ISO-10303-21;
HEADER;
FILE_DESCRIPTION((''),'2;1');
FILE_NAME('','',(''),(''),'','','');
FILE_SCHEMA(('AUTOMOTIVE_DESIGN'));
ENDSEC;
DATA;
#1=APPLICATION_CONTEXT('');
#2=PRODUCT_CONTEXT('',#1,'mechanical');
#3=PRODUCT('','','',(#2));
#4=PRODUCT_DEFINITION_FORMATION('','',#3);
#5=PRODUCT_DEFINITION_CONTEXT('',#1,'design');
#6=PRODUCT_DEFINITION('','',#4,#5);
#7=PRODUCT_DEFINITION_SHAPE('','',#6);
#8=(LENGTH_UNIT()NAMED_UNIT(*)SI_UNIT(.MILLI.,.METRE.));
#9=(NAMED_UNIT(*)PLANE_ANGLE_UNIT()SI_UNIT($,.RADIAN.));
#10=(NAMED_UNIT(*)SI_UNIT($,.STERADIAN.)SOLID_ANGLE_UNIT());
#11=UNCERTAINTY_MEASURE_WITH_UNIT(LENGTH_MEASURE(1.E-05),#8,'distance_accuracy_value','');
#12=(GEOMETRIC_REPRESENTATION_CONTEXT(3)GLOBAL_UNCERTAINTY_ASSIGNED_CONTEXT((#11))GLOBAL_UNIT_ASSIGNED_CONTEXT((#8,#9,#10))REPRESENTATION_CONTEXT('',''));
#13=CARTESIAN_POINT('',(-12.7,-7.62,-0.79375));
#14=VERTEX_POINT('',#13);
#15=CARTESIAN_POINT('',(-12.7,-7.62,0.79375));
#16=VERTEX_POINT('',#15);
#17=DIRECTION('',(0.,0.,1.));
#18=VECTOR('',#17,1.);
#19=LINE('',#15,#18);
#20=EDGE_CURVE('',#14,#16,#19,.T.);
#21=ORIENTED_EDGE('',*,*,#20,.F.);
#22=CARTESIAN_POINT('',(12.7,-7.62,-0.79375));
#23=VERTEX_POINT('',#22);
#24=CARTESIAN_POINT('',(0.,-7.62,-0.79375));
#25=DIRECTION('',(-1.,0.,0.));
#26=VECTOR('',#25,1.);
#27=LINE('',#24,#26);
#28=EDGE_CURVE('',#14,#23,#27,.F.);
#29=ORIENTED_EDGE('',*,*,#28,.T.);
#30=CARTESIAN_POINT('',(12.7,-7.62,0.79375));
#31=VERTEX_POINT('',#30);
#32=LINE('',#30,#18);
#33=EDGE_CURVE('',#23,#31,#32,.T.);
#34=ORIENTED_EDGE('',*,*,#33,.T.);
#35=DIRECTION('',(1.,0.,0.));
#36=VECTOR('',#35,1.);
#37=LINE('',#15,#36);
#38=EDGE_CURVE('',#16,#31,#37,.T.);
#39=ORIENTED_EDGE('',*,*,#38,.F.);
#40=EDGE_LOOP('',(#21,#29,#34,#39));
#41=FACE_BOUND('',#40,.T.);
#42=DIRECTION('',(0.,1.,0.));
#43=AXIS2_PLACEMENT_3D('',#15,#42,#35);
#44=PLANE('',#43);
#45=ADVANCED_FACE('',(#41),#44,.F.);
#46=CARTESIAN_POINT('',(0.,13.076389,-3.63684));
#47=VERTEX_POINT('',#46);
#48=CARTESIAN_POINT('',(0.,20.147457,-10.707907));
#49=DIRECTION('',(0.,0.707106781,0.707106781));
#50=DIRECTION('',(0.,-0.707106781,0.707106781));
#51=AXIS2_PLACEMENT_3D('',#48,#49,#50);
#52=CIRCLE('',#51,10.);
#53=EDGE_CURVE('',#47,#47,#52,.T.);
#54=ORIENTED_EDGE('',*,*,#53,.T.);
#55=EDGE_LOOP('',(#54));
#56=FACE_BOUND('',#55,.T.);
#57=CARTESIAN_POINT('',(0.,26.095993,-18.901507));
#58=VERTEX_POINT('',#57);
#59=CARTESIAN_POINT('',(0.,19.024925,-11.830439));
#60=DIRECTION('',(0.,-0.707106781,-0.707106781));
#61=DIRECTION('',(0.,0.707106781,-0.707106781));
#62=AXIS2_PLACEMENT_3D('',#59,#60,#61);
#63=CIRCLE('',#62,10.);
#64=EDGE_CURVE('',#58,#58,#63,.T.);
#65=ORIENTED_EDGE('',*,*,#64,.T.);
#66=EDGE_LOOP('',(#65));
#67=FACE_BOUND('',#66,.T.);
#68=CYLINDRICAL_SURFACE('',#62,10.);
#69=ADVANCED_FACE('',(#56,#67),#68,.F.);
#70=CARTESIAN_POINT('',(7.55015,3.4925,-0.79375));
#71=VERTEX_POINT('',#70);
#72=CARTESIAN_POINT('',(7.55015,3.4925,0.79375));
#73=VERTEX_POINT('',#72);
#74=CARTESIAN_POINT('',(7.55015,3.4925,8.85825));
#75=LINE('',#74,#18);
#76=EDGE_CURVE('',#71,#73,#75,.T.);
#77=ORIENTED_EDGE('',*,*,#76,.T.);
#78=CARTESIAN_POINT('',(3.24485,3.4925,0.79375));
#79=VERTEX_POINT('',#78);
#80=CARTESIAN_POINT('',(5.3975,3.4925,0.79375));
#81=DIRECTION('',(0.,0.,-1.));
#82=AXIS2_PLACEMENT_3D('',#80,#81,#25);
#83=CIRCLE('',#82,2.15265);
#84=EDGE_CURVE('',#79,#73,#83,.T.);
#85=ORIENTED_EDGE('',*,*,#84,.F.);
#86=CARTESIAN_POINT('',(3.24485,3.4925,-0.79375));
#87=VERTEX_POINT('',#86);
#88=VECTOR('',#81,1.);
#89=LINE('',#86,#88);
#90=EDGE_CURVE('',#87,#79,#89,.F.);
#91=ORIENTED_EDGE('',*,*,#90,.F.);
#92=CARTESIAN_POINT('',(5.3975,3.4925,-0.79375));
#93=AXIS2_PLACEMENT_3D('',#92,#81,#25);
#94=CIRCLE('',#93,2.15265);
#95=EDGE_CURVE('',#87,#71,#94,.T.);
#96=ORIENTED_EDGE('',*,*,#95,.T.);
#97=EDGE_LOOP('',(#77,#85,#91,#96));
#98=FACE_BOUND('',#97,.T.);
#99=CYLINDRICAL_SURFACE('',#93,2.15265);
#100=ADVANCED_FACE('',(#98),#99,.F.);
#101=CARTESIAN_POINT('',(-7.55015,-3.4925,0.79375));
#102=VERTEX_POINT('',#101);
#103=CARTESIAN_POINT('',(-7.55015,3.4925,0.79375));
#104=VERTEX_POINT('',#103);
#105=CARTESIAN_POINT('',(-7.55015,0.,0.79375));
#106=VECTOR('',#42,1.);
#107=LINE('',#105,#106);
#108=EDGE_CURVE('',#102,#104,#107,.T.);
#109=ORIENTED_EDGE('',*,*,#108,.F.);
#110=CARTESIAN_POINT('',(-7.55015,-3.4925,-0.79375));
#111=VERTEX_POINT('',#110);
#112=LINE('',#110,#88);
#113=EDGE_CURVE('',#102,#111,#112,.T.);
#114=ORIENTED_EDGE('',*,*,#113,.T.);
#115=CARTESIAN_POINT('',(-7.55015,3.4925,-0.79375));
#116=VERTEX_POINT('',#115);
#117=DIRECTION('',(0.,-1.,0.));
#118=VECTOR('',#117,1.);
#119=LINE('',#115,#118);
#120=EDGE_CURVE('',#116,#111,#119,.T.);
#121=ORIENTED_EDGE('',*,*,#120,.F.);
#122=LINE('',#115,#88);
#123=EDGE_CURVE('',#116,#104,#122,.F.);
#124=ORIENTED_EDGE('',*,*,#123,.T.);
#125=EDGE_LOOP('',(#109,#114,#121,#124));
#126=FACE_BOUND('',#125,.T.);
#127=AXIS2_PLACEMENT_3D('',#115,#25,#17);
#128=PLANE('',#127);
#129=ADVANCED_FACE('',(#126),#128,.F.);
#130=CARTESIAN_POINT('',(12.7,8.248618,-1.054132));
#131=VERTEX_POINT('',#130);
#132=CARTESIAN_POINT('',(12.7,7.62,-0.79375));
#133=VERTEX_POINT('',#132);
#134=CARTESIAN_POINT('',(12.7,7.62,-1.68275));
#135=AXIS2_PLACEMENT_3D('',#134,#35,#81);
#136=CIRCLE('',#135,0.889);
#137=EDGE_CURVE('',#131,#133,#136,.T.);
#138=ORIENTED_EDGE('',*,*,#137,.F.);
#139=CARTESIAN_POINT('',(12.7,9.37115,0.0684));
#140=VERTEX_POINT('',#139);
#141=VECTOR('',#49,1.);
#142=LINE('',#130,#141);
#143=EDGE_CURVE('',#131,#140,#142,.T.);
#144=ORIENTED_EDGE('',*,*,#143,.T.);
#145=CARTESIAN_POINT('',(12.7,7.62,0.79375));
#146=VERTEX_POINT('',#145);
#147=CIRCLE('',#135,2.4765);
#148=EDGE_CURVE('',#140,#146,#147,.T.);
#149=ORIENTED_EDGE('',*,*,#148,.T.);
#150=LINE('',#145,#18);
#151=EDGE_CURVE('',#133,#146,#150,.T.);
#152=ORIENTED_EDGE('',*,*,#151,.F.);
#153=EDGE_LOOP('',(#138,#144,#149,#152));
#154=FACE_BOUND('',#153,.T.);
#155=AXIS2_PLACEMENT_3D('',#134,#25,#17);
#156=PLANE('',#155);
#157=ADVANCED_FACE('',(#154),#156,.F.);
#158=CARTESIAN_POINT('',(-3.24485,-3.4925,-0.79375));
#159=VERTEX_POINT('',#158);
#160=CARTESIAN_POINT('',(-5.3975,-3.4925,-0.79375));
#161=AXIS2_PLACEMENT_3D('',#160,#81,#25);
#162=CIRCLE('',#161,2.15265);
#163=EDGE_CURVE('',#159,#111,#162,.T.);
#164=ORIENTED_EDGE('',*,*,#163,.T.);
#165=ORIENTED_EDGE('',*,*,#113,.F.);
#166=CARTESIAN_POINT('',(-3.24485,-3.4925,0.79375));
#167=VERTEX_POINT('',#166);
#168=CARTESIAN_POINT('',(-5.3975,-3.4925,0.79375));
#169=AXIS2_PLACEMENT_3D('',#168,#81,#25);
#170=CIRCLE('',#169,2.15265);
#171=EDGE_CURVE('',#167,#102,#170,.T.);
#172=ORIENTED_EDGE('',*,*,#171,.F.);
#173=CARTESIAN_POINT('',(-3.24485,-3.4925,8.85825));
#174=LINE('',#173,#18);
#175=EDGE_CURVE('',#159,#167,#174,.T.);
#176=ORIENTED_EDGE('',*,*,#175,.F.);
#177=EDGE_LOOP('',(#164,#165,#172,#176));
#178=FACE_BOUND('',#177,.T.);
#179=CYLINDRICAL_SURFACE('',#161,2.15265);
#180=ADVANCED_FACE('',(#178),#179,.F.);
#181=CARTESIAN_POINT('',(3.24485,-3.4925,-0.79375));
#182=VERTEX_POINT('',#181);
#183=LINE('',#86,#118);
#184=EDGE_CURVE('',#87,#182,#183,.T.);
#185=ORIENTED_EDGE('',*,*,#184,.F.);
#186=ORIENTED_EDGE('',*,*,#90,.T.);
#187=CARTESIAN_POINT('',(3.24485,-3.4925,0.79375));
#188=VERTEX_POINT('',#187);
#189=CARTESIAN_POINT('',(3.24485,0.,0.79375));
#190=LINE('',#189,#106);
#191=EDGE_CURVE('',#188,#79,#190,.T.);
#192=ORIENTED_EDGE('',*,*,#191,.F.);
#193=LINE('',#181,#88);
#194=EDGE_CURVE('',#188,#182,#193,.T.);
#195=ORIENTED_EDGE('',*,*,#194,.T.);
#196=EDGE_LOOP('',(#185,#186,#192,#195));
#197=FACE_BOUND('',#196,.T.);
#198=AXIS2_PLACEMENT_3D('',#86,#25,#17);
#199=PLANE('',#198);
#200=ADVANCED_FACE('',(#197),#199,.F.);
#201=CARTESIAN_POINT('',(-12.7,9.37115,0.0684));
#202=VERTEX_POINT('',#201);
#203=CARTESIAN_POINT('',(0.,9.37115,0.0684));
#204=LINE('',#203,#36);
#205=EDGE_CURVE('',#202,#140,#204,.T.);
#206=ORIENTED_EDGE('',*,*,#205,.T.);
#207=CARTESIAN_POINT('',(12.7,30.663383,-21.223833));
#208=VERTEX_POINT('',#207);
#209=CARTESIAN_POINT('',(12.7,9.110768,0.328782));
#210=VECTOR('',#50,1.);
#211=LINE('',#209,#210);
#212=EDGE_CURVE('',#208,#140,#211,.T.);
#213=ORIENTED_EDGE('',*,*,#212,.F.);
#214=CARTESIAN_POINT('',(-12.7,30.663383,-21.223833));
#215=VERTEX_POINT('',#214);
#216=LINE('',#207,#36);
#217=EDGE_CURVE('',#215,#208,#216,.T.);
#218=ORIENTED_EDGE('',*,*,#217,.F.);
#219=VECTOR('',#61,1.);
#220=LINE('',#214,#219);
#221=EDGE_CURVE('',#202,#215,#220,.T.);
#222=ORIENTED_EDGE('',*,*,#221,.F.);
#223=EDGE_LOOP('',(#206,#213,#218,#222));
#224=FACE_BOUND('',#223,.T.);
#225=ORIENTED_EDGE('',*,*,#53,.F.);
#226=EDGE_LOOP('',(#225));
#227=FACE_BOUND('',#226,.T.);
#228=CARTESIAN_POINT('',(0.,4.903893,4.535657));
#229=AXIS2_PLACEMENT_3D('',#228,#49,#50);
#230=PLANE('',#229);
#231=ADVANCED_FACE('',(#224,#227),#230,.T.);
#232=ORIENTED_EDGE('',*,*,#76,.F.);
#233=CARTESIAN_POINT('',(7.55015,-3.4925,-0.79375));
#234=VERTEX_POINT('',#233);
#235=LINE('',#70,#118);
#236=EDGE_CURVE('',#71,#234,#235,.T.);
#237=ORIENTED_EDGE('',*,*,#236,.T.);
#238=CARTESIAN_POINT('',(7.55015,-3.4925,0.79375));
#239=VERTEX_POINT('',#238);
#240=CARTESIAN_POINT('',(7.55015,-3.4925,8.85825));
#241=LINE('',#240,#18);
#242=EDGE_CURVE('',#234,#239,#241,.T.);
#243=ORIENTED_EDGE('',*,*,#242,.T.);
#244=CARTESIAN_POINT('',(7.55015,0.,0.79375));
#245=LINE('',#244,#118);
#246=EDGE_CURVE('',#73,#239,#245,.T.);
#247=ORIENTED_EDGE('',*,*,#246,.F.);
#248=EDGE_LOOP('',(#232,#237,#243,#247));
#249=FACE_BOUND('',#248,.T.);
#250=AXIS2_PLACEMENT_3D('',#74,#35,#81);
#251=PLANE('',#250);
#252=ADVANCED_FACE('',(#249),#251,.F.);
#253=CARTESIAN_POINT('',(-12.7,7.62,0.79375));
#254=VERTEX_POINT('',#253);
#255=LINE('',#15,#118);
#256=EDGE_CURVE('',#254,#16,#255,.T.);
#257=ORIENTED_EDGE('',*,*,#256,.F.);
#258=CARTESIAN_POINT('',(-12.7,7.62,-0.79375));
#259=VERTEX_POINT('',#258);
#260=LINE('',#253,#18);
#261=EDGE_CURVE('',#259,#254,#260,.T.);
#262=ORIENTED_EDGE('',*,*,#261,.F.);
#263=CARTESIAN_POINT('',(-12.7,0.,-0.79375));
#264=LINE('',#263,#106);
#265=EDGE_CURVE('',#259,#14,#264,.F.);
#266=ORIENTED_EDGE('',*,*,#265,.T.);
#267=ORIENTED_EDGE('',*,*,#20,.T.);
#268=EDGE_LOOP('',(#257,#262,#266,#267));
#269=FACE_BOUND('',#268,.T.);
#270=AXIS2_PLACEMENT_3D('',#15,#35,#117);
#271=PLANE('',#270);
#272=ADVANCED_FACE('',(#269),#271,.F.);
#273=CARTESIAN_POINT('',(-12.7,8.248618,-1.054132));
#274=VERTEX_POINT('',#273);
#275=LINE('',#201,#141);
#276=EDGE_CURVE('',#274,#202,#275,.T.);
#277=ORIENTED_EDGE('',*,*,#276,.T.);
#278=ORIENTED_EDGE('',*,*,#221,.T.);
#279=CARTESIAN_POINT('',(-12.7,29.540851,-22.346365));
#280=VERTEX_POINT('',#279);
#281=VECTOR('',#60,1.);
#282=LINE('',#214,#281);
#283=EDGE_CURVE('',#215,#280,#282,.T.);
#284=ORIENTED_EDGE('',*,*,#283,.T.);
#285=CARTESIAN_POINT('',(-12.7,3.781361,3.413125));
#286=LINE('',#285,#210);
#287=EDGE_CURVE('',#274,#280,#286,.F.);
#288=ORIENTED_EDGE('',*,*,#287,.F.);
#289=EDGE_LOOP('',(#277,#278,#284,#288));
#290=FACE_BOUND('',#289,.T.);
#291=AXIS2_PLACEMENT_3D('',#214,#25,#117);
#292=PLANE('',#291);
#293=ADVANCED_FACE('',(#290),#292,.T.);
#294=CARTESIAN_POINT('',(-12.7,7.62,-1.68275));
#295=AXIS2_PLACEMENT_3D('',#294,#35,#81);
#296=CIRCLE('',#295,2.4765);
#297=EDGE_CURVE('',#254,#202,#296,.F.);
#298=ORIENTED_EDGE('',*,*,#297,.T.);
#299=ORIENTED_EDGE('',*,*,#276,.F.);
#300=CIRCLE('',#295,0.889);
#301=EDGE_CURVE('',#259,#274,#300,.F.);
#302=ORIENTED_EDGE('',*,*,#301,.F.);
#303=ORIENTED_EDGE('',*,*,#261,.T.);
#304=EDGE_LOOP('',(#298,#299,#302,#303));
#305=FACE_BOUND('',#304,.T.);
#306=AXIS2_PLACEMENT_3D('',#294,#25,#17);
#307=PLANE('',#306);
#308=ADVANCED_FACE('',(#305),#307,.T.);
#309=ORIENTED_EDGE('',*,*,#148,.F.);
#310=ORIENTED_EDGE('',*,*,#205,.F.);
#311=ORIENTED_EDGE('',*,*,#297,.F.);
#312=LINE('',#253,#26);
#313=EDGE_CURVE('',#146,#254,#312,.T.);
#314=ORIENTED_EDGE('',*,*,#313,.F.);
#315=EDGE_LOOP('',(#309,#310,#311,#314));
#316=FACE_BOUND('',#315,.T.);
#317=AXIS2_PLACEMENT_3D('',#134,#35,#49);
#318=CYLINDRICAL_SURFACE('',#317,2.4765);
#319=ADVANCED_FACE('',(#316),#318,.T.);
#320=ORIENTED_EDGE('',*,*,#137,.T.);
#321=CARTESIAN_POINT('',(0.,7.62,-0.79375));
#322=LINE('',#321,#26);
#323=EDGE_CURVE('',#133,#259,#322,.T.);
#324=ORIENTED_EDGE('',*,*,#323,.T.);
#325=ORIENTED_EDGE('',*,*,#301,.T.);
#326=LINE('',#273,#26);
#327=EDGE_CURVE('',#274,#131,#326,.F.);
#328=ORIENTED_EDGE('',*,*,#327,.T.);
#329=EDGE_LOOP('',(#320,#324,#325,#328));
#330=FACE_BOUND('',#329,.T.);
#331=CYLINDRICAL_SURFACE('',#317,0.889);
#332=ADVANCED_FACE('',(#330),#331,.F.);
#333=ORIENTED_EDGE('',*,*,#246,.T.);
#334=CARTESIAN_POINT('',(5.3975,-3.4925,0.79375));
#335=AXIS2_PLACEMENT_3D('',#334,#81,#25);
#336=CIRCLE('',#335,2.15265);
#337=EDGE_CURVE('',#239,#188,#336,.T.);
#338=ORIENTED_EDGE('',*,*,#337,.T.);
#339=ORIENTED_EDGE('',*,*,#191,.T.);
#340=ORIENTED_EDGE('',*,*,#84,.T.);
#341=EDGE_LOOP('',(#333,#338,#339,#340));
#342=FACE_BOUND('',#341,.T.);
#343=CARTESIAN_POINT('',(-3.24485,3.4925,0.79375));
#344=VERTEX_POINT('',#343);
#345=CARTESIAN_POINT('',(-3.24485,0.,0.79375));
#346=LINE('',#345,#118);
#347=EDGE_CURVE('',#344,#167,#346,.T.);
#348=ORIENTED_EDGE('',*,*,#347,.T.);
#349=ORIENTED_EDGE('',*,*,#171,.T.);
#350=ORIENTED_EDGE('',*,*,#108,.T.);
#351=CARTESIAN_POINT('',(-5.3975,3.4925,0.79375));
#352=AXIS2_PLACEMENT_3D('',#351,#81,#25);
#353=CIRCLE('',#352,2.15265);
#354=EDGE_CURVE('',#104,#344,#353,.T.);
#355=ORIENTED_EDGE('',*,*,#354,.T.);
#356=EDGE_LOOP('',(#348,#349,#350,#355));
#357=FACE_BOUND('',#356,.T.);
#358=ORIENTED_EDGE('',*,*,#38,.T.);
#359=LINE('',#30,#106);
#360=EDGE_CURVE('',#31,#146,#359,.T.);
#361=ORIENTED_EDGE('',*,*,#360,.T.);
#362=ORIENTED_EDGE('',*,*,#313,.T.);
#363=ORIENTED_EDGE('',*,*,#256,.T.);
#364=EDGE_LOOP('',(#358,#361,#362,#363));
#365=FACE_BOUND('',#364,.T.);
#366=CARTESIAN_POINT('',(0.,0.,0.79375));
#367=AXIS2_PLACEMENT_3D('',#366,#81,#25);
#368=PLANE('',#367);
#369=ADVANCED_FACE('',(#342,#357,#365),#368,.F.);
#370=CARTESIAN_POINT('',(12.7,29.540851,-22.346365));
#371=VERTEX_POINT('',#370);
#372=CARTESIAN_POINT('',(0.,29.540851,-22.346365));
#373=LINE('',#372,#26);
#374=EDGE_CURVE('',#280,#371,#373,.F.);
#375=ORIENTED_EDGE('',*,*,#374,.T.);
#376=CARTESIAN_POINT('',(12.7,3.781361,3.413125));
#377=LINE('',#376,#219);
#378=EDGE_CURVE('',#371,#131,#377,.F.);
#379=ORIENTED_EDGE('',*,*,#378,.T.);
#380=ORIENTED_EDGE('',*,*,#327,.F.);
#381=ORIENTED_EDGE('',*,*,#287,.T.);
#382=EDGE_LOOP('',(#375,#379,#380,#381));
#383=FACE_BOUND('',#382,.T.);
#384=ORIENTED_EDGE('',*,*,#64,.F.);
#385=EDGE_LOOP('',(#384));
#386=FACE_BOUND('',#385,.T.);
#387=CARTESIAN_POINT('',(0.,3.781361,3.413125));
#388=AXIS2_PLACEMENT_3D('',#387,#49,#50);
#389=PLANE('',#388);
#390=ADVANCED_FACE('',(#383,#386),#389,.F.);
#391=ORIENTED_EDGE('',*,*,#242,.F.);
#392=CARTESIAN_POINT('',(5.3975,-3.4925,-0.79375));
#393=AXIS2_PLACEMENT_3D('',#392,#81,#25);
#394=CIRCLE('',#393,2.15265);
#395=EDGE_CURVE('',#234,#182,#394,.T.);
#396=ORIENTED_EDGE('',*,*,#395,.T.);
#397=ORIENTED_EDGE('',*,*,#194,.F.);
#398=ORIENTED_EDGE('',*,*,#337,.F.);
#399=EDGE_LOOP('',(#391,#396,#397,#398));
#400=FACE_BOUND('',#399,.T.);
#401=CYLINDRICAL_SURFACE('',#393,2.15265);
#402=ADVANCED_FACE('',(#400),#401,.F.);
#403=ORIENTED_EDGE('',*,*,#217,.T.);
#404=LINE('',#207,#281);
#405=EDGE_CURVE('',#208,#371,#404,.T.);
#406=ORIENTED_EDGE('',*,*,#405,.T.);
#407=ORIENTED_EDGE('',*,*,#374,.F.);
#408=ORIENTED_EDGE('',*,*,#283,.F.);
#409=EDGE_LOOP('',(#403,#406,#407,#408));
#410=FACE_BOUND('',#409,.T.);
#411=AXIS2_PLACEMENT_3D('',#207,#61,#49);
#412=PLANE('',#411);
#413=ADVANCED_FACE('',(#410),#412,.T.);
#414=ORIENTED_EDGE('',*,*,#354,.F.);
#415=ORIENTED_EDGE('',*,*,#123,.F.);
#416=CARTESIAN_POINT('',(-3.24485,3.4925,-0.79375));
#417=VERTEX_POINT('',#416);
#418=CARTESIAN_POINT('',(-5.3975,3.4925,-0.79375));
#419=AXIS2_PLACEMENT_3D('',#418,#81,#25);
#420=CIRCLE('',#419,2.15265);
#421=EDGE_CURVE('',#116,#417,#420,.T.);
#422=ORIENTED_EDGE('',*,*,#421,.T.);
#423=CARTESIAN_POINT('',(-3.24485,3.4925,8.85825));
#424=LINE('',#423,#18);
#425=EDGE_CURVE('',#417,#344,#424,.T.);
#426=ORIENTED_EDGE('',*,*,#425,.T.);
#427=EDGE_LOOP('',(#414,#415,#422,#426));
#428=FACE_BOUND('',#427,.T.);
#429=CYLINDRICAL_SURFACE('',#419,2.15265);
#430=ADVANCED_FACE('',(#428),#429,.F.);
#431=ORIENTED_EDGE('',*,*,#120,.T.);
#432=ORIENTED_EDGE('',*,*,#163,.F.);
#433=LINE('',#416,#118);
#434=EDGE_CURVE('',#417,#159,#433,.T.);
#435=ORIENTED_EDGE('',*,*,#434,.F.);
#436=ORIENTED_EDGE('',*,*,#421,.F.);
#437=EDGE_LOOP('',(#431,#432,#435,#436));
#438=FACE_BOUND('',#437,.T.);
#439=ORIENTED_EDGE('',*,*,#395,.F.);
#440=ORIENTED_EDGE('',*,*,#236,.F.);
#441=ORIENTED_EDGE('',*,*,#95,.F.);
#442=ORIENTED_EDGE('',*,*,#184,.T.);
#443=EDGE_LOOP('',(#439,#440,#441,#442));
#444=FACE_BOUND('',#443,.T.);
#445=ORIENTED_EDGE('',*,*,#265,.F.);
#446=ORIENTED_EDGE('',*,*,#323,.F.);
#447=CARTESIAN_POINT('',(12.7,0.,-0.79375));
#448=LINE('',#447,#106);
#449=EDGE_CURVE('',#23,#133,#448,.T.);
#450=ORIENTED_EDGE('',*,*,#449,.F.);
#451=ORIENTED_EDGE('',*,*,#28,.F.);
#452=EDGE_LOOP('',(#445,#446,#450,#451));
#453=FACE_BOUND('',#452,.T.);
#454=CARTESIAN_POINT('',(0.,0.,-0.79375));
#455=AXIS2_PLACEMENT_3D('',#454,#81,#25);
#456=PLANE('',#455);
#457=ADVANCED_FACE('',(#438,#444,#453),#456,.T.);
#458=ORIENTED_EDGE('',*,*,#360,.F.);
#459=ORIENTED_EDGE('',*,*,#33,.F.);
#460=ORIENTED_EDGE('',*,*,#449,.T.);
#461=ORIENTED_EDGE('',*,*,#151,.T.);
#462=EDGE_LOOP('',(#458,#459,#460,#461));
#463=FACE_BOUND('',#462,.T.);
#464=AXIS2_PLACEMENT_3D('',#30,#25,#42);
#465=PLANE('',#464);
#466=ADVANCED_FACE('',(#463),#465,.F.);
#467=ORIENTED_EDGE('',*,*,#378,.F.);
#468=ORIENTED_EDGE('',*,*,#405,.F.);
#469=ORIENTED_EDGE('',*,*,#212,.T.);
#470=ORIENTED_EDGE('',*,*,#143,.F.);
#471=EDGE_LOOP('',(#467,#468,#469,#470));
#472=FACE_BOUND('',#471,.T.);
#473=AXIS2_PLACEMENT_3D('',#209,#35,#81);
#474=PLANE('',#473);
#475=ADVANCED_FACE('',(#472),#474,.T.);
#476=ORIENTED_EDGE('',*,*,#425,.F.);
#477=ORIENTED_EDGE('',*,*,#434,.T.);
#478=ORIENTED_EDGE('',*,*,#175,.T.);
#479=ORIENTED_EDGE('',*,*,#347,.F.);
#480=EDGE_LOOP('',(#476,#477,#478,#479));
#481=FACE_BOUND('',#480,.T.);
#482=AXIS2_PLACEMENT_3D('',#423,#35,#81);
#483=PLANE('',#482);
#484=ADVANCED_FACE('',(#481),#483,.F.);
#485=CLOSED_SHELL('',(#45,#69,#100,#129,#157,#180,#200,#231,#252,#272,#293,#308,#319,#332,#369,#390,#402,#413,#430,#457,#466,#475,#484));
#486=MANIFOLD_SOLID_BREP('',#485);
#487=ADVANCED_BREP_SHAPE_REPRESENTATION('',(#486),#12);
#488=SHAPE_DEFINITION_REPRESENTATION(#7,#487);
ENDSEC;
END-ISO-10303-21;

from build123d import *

# Parameters (mm, degrees)
SKETCH1_W                 = 25.4
SKETCH1_H                 = 15.24
BOSS_EXTRUDE1_DEPTH       = 0.79375
EDGE_FLANGE1_DEPTH        = 25.4
F_6_START                 = -0.79375
F_6_CLEARANCE_SLOT1_DEPTH = 1.5875
M18_CLEARANCE_HOLE1_D     = 20
M18_CLEARANCE_HOLE1_DEPTH = 9.652
M18_CLEARANCE_HOLE1_TIP   = 6.00860619


# Read off the part's stored shape, not the designer's step: #6 Clearance Slot1
# Sheet-metal steps are written as plain solids
with BuildPart() as part:
    # Sketch1 → Boss-Extrude1 (new, symmetric)
    with BuildSketch(Plane.XY):
        Rectangle(SKETCH1_W, SKETCH1_H)
    extrude(amount=BOSS_EXTRUDE1_DEPTH, both=True)

    # Edge-Flange1 section (across the edge) → Edge-Flange1 (add)
    with BuildSketch(Plane(origin=(-12.7, 7.988235857, -0.79375), x_dir=(0, -0.7071067811865438, -0.7071067811865512), z_dir=(1, 0, 0))):
        with BuildLine():
            Line((-1.5875, 0.368235857), (-1.5875, 30.48))
            Line((-1.5875, 30.48), (0, 30.48))
            Line((0, 30.48), (0, 0.368235857))
            ThreePointArc((0, 0.368235857), (0.067671096, 0.028030286), (0.260382072, -0.260382072))
            Line((0.260382072, -0.260382072), (-0.862149944, -1.382914087))
            ThreePointArc((-0.862149944, -1.382914087), (-1.398987662, -0.579479663), (-1.5875, 0.368235857))
        make_face()
    extrude(amount=EDGE_FLANGE1_DEPTH)

    # #6 Clearance Slot1 outline → #6 Clearance Slot1 (cut)
    with BuildSketch(Plane.XY.offset(F_6_START)):
        with BuildLine():
            ThreePointArc((-3.24485, 3.4925), (-5.3975, 5.64515), (-7.55015, 3.4925))
            Line((-7.55015, 3.4925), (-7.55015, -3.4925))
            ThreePointArc((-7.55015, -3.4925), (-5.3975, -5.64515), (-3.24485, -3.4925))
            Line((-3.24485, -3.4925), (-3.24485, 3.4925))
        make_face()
        with BuildLine():
            ThreePointArc((3.24485, -3.4925), (5.3975, -5.64515), (7.55015, -3.4925))
            Line((7.55015, -3.4925), (7.55015, 3.4925))
            ThreePointArc((7.55015, 3.4925), (5.3975, 5.64515), (3.24485, 3.4925))
            Line((3.24485, 3.4925), (3.24485, -3.4925))
        make_face()
    extrude(amount=F_6_CLEARANCE_SLOT1_DEPTH, mode=Mode.SUBTRACT)

    # M18 Clearance Hole1
    with Locations(Plane(origin=(0, 3.597242928, 3.597242928), x_dir=(-1, 0, 0), z_dir=(0, -0.7071067811865438, -0.7071067811865512))):
        with Locations((0, 21.818037609)):
            Hole(M18_CLEARANCE_HOLE1_D / 2, depth=M18_CLEARANCE_HOLE1_DEPTH)
            with Locations((0, 0, -(M18_CLEARANCE_HOLE1_DEPTH + M18_CLEARANCE_HOLE1_TIP / 2))):  # 118° drill point
                Cone(0, M18_CLEARANCE_HOLE1_D / 2, M18_CLEARANCE_HOLE1_TIP, mode=Mode.SUBTRACT)


solid = part.part
